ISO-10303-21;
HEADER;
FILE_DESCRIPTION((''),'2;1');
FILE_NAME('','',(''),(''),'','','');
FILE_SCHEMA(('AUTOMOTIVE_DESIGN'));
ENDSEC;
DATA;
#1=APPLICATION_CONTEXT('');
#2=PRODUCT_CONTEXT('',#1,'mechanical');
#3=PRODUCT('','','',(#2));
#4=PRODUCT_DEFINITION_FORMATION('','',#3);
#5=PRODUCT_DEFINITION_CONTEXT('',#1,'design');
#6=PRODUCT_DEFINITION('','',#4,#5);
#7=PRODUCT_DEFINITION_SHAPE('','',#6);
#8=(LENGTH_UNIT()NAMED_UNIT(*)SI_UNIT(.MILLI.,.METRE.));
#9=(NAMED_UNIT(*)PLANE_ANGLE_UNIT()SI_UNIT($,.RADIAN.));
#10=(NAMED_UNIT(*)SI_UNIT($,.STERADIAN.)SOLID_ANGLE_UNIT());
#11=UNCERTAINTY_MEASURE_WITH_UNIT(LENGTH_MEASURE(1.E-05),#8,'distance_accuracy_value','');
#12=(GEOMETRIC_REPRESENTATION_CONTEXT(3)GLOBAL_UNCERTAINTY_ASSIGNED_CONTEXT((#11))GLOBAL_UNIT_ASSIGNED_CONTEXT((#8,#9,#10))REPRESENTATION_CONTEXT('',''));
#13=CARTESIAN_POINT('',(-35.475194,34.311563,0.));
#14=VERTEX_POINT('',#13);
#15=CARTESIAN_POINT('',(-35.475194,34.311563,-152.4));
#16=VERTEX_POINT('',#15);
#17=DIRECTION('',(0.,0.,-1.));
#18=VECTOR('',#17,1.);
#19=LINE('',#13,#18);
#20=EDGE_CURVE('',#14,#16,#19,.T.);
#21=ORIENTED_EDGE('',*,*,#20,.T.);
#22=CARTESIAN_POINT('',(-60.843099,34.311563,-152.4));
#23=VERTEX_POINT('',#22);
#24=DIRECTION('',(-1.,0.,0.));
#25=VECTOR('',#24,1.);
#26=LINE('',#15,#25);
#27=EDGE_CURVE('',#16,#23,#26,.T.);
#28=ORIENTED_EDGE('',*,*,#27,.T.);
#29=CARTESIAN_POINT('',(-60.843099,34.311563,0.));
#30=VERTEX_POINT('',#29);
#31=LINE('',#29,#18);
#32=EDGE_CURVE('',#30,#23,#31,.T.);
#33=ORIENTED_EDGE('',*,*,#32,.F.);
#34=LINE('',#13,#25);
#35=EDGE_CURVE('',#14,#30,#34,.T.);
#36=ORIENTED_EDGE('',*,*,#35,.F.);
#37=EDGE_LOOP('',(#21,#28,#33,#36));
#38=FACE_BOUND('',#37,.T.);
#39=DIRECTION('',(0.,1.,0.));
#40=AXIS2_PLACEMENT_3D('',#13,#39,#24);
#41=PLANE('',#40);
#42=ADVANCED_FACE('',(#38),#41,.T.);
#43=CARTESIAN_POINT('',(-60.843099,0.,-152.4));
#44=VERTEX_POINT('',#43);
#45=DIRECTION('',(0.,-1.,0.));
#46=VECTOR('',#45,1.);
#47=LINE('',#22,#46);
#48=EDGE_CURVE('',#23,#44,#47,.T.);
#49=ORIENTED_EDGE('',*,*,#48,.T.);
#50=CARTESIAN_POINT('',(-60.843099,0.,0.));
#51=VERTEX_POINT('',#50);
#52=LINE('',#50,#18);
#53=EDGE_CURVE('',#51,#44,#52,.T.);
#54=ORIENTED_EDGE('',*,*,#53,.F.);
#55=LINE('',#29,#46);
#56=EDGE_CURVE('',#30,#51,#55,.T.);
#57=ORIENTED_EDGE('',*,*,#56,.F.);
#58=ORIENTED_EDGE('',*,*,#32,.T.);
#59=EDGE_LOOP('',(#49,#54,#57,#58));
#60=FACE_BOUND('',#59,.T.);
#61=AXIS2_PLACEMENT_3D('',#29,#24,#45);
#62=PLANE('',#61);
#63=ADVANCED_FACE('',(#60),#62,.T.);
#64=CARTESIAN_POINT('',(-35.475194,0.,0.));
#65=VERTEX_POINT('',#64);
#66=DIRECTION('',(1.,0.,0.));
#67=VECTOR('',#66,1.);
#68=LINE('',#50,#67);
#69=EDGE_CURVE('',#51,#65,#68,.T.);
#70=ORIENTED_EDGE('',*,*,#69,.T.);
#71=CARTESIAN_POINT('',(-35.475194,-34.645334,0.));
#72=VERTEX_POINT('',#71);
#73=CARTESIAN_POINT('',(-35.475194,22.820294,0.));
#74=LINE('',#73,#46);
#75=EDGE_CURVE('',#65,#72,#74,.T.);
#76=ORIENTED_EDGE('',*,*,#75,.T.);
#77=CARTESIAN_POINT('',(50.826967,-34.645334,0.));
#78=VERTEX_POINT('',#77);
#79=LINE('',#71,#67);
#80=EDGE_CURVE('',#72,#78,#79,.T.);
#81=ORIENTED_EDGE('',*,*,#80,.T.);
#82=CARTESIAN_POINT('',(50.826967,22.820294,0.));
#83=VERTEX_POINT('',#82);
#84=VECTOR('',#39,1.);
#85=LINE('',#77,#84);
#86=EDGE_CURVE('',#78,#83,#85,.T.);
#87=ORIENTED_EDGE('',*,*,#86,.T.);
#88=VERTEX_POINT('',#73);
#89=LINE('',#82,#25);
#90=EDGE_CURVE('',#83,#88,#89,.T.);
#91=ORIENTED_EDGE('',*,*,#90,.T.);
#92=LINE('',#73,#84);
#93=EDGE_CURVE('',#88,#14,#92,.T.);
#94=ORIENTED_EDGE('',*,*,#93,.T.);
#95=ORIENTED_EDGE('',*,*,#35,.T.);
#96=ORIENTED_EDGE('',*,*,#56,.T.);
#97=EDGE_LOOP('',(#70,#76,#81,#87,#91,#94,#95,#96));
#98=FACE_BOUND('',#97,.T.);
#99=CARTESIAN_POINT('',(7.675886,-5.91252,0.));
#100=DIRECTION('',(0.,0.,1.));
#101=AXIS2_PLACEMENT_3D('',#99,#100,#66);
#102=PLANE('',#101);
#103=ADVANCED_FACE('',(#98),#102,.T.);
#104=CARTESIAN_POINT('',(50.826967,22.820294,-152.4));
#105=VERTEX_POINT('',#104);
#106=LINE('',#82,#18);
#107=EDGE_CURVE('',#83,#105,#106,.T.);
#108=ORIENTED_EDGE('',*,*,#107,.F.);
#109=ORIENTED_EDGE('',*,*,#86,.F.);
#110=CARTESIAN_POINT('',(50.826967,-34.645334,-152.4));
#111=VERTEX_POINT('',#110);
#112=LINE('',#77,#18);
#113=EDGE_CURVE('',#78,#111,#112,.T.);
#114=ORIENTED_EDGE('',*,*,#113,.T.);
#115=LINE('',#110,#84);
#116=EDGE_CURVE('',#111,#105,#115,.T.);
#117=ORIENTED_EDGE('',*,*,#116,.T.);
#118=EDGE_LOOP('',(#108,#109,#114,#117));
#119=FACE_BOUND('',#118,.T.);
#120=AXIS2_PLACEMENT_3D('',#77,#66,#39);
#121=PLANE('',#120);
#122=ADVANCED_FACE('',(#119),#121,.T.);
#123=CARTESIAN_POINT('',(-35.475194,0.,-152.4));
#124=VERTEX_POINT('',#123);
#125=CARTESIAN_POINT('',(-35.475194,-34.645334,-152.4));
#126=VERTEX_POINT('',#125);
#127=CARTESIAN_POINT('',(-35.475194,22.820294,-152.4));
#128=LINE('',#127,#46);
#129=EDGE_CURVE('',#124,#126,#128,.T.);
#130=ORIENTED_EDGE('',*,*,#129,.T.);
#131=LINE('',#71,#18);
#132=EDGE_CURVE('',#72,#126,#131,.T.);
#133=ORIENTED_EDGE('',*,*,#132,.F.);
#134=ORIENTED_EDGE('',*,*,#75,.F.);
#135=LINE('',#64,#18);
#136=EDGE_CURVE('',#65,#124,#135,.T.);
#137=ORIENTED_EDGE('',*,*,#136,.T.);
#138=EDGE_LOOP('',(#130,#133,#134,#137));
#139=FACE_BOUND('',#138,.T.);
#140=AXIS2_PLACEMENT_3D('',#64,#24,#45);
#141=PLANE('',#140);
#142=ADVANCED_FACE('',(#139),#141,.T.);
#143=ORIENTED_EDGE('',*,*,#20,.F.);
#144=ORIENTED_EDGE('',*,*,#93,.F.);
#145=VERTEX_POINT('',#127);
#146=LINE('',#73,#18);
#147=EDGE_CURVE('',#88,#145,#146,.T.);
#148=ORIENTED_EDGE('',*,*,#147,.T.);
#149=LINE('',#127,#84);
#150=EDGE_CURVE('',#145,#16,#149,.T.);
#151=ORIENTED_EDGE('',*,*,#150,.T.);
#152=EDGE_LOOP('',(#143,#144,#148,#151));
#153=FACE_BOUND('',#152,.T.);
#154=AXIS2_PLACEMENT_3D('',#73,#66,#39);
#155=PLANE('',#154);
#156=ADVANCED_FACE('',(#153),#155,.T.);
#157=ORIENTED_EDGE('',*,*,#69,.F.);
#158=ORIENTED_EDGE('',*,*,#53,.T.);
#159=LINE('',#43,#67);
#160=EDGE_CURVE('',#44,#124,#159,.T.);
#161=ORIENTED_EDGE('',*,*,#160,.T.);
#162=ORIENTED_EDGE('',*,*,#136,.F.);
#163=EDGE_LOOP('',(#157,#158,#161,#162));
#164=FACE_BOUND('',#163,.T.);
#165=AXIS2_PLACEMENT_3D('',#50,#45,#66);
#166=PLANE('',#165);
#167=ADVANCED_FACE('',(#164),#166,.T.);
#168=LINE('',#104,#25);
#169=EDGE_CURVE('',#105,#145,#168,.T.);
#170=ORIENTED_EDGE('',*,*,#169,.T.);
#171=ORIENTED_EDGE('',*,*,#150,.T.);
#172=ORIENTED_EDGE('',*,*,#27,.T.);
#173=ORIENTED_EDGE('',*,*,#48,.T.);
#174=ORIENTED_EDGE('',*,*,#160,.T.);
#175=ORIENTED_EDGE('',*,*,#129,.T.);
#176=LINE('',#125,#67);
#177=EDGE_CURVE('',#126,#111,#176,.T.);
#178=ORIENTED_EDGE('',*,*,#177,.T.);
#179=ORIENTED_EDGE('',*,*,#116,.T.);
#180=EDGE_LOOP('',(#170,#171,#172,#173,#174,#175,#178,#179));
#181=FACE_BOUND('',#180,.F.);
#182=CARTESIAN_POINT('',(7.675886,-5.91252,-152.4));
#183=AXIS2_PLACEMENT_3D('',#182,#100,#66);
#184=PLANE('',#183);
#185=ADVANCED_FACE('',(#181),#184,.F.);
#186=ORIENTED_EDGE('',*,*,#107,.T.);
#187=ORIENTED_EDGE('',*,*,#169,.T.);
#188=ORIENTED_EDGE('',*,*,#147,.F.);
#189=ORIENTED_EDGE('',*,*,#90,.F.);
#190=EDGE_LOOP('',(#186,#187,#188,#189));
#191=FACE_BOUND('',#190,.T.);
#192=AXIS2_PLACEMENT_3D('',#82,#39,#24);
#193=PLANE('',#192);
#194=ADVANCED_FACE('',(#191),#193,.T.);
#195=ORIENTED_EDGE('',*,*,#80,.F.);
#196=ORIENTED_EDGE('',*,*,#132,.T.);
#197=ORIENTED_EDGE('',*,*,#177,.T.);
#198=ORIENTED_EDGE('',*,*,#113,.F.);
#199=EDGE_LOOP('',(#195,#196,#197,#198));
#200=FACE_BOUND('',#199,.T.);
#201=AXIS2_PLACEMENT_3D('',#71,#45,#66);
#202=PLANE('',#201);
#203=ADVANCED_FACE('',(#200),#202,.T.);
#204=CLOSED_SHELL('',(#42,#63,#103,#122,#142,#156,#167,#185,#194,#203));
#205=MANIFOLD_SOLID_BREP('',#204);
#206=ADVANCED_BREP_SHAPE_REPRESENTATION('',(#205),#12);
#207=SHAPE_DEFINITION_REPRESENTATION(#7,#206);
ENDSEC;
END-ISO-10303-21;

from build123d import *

# Parameters (mm, degrees)
F3_DEPTH = 152.4


# Not quite as in the source:
# - a feature of the source that left no trace in its solid (it failed there, or was rolled back) is left out


with BuildPart() as f3:
    # F2 (on Top) → F3 (new body)
    with BuildSketch(Plane.XY):
        Polygon((-35.4751944542, 0), (-35.4751944542, -34.6453338861), (50.8269667625, -34.6453338861), (50.8269667625, 22.8202939034), (-35.4751944542, 22.8202939034), align=None)
        Polygon((-60.8430989087, 0), (-35.4751944542, 0), (-35.4751944542, 22.8202939034), (-35.4751944542, 34.3115627766), (-60.8430989087, 34.3115627766), align=None)
    extrude(amount=-F3_DEPTH)


solid = f3.part
